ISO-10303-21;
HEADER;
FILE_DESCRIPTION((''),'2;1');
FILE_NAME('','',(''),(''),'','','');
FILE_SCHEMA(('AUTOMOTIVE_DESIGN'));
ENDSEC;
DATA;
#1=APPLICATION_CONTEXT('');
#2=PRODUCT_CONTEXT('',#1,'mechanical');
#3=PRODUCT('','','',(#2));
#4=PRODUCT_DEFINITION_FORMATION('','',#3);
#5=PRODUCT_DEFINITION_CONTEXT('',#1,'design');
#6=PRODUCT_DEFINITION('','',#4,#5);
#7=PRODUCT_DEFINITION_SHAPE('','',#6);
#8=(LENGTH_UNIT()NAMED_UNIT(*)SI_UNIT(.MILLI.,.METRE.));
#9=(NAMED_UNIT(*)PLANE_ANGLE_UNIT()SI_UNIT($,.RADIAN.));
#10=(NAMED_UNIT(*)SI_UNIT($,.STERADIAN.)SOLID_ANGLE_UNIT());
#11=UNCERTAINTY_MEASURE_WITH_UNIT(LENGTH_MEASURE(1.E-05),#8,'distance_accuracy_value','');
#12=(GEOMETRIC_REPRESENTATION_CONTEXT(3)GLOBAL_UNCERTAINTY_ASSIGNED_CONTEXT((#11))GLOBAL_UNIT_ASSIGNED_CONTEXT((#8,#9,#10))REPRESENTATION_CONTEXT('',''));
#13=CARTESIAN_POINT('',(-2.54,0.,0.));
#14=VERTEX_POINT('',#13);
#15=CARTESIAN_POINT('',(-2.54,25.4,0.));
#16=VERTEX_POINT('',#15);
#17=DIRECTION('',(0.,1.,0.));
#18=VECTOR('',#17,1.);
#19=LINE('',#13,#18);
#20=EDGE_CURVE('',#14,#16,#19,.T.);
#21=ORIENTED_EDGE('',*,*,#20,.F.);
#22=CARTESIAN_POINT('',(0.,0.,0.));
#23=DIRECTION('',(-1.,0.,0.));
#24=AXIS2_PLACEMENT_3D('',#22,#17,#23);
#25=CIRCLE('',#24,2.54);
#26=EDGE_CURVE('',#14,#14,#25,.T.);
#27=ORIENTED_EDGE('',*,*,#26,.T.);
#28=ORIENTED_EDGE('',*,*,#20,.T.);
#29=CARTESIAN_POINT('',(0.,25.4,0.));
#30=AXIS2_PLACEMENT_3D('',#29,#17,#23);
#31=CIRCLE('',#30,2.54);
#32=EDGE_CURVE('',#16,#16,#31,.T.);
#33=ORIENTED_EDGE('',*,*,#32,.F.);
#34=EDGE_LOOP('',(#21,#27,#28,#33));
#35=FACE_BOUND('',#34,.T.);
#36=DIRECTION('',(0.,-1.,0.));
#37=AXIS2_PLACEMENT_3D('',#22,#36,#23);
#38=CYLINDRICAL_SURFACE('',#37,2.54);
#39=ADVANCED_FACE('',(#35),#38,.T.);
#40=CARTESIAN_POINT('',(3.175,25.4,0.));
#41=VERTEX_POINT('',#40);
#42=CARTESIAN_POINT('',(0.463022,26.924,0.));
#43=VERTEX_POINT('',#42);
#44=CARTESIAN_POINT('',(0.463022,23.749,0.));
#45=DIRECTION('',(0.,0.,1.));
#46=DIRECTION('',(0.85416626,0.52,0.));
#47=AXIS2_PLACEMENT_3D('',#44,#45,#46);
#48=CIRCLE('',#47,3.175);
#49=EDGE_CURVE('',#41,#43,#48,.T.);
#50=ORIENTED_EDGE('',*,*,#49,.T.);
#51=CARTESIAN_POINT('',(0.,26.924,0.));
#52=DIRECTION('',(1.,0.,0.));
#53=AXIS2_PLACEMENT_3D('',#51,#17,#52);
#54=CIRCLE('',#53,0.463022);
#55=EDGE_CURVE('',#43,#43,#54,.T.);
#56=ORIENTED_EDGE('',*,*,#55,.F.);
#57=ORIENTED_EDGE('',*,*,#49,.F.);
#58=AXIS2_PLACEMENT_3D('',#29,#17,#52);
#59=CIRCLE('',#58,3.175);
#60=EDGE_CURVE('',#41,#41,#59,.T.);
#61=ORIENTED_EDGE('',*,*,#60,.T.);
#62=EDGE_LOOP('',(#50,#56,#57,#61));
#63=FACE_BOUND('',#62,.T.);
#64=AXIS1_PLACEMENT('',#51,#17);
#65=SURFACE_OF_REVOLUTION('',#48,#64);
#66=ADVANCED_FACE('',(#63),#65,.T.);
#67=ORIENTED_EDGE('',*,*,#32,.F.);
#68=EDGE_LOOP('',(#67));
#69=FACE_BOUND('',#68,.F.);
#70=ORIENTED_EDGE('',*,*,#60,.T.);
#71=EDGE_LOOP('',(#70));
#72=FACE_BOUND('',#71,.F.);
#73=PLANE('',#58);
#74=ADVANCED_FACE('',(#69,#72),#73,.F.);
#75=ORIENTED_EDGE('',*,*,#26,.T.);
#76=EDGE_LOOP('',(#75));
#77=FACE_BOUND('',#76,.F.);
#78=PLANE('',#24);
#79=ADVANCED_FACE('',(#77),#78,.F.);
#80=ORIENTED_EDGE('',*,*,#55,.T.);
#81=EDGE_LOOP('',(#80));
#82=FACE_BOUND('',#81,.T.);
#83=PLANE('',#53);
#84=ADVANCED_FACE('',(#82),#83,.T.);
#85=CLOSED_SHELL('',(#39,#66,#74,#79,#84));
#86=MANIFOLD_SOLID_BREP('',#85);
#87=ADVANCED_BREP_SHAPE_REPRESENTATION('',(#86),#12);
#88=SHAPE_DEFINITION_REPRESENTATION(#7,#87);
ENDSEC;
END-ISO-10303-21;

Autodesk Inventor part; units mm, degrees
ref_plane "YZ Plane" through (0, 0, 0) normal (1, 0, 0) x (0, 1, 0)
ref_plane "XZ Plane" through (0, 0, 0) normal (0, 1, 0) x (-1, 0, 0)
ref_plane "XY Plane" through (0, 0, 0) normal (0, 0, 1) x (1, 0, 0)
sketch "Sketch1" plane through (0, 0, 0) normal (0, 1, 0) x (-1, 0, 0)
  point P0 (0, 0)
sketch "Sketch2" plane through (0, 0, 0) normal (0, 1, 0) x (-1, 0, 0)
  point P0 (0, 0)
sketch "Sketch3" plane through (0, 0, 0) normal (0, 1, 0) x (-1, 0, 0)
  circle A0 centre (0, 0) radius 2.54
  dimension "d0" = 5.08
extrude "Extrusion1" add sketch "Sketch3" along normal blind 25.4
thread "Thread1" size "12-24 UNC" class "2A" standard "ANSI Unified Screw Threads" full length
sketch "Sketch4" plane through (0, 25.4, 0) normal (0, 1, 0) x (1, 0, 0)
  circle A0 centre (0, 0) radius 3.175
  dimension "d5" = 6.35
extrude "Extrusion2" add sketch "Sketch4" along normal blind 1.524
fillet "Fillet1" radius 3.175 1 edges at (-3.175, 26.924, 0)
properties part number "1inchscrew"
